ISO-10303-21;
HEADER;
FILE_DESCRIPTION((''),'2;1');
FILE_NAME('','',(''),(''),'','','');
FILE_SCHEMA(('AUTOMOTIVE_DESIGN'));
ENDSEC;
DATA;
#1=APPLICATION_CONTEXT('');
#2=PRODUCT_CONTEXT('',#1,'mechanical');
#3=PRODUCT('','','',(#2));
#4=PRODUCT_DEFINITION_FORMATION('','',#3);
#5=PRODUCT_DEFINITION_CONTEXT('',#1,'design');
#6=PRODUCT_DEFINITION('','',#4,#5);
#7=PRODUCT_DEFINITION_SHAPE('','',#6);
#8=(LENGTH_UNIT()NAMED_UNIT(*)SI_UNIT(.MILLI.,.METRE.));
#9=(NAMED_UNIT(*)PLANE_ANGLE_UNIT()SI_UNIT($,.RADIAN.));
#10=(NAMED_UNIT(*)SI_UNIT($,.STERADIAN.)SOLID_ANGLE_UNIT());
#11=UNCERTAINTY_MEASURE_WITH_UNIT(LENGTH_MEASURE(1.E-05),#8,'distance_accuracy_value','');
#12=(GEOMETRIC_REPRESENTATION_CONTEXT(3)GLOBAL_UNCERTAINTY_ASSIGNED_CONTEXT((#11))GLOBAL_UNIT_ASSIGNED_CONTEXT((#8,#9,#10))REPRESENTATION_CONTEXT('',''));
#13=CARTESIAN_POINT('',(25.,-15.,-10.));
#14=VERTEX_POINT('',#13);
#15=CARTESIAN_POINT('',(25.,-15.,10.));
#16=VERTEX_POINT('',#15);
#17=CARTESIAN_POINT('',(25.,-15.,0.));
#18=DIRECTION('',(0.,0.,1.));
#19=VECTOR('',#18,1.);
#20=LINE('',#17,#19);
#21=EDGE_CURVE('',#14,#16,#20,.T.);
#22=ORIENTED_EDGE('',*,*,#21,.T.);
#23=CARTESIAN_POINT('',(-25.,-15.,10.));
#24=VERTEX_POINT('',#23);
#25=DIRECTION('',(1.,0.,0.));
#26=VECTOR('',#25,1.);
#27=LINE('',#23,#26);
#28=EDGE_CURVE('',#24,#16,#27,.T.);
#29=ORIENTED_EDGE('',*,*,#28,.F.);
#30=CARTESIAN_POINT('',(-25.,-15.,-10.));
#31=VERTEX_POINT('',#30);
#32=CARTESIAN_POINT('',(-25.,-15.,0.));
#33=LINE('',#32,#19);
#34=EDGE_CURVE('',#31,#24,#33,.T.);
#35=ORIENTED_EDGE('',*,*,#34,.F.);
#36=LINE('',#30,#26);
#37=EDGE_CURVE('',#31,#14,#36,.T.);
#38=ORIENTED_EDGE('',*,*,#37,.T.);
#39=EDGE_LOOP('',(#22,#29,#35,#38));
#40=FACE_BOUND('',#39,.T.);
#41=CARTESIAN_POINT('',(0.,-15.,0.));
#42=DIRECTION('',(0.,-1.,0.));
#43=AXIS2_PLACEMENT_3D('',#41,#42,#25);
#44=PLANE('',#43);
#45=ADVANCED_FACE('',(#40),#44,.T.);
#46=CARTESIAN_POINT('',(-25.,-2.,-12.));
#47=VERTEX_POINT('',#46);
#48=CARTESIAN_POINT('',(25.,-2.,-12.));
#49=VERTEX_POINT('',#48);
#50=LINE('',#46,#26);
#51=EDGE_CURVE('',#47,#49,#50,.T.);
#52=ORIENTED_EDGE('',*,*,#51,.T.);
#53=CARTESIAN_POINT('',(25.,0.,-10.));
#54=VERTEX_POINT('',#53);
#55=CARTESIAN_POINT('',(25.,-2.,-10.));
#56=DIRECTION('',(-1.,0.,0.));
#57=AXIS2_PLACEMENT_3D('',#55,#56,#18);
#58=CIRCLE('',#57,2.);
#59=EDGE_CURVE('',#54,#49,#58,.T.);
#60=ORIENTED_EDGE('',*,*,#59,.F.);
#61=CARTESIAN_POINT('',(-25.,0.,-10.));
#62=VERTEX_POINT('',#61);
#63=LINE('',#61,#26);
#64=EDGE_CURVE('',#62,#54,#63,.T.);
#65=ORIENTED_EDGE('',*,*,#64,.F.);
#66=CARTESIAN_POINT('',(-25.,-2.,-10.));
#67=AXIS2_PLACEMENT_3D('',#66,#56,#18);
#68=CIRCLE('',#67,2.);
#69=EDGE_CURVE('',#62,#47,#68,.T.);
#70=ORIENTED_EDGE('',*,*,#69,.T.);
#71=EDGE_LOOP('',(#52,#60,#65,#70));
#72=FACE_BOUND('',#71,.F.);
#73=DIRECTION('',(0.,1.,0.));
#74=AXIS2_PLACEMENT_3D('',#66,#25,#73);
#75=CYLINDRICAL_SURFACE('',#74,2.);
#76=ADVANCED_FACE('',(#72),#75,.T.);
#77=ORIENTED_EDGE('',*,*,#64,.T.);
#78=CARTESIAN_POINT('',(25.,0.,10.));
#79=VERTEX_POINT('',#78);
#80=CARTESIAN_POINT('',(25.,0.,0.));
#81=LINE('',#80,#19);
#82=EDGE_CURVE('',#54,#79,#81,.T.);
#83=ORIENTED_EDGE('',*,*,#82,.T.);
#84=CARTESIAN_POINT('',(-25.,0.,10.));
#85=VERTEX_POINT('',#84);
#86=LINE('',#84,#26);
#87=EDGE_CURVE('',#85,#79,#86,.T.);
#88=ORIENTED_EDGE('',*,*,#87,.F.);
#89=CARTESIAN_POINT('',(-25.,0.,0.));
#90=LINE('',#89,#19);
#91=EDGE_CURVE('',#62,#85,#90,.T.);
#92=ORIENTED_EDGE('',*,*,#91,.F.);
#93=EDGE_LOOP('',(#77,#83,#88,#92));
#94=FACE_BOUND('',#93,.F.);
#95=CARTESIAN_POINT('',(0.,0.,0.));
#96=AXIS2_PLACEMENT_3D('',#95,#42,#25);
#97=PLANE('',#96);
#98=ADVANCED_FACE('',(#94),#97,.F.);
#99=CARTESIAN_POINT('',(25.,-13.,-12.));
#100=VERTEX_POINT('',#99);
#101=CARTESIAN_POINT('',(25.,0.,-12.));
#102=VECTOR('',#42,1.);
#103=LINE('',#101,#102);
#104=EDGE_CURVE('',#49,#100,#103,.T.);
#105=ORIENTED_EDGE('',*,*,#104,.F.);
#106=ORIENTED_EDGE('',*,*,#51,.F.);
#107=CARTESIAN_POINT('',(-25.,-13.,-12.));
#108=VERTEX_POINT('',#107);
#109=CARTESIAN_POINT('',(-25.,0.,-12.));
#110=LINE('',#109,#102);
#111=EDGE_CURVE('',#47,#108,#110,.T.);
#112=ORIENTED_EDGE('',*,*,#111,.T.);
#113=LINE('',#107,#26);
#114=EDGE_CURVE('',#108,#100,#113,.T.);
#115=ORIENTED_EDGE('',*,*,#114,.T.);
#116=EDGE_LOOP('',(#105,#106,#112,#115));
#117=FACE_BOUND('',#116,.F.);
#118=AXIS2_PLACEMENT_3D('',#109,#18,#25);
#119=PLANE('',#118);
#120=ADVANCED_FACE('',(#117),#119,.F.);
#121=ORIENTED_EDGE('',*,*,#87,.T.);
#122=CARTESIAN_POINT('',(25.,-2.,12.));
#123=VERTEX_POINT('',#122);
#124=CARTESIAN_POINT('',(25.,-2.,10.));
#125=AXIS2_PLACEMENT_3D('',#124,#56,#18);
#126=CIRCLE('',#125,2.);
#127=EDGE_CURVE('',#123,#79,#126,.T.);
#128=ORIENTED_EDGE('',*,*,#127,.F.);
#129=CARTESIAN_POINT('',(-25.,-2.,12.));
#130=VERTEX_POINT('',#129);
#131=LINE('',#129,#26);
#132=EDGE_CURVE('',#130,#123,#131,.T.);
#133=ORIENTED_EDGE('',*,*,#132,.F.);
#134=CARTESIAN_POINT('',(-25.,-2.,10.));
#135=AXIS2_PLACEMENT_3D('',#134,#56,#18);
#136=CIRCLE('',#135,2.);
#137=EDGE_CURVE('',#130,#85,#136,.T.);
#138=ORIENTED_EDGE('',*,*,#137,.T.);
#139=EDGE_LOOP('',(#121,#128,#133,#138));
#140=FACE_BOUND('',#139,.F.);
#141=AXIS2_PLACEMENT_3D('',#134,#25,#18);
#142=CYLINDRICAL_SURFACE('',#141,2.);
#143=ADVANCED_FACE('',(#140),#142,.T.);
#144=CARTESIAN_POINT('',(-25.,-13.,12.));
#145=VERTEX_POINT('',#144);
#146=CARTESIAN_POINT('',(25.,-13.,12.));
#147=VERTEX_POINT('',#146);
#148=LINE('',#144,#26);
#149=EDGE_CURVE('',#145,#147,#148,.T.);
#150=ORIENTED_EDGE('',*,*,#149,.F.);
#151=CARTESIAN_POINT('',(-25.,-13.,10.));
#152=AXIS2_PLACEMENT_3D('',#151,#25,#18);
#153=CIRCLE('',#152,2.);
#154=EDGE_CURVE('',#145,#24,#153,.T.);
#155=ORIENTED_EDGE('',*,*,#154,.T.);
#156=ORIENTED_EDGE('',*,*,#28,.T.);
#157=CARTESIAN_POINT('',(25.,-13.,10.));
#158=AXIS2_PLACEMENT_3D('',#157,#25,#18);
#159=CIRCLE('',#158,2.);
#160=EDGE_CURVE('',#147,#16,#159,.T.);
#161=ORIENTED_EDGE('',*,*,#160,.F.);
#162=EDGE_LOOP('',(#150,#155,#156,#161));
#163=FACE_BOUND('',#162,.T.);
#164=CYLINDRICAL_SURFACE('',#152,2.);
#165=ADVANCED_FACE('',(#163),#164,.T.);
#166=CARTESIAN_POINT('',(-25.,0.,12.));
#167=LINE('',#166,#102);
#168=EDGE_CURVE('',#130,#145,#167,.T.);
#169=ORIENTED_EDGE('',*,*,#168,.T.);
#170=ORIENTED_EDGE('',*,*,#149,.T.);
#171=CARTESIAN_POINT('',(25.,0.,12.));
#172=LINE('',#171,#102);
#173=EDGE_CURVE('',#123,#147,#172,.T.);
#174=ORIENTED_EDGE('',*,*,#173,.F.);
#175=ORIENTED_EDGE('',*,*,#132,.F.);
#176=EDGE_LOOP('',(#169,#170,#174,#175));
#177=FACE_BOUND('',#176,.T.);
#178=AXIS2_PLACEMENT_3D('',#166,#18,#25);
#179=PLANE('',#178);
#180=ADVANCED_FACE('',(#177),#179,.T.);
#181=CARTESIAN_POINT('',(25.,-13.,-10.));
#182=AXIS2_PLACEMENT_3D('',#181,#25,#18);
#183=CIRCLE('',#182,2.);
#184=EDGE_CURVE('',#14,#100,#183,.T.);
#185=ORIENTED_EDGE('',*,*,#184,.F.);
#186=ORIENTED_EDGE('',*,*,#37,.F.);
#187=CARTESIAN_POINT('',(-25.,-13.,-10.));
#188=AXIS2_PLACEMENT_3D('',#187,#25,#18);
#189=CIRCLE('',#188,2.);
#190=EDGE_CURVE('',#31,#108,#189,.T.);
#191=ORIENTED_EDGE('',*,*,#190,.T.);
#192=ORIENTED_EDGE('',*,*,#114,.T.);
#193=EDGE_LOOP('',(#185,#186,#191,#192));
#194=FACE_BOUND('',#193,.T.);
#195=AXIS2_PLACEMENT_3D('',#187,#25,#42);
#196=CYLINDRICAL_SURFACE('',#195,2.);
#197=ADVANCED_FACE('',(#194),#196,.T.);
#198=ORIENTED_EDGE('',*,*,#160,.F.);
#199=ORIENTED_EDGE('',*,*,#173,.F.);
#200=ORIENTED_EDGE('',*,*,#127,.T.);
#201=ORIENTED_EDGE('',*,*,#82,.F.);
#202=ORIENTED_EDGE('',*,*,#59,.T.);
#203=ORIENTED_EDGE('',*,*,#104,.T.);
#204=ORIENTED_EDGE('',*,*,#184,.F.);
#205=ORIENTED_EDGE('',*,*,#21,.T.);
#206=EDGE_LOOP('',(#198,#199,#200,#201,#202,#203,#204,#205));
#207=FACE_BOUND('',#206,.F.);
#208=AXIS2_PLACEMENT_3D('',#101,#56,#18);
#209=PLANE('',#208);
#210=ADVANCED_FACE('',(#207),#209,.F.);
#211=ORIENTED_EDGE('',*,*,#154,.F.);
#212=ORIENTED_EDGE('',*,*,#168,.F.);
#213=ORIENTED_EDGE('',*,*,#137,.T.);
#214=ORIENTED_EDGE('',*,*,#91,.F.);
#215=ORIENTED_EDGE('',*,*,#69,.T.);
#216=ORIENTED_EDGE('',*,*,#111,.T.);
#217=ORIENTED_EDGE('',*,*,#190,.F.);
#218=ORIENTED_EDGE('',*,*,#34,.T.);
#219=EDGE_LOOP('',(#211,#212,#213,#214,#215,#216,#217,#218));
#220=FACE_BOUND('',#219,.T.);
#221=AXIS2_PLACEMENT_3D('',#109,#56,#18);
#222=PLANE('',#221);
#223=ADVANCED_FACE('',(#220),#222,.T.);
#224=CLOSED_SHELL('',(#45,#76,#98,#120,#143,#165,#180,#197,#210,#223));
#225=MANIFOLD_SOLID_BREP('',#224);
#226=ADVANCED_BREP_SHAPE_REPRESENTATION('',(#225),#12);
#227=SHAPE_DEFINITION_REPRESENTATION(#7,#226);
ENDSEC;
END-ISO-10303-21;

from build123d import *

# Parameters (mm, degrees)
F0_W     = 50
F0_H     = 24
F1_DEPTH = 15
F2_R     = 2
F3_R     = 2
F4_R     = 2


# Not quite as in the source:
# - the program builds the solid bodies; features that only make, move or delete a surface that nothing else refers to are left out


with BuildPart() as f1:
    # F0 (on Front) → F1 (new body)
    with BuildSketch(Plane.XZ):
        Rectangle(F0_W, F0_H)
    extrude(amount=F1_DEPTH)

    # F2
    f2_edges = [f1.edges().sort_by_distance(p)[0] for p in [
        (0, -15, 12),
    ]]
    fillet(f2_edges, radius=F2_R)

    # F3
    f3_edges = [f1.edges().sort_by_distance(p)[0] for p in [
        (0, 0, 12),
        (0, -15, -12),
    ]]
    fillet(f3_edges, radius=F3_R)

    # F4
    f4_edges = [f1.edges().sort_by_distance(p)[0] for p in [
        (0, 0, -12),
    ]]
    fillet(f4_edges, radius=F4_R)


solid = f1.part
